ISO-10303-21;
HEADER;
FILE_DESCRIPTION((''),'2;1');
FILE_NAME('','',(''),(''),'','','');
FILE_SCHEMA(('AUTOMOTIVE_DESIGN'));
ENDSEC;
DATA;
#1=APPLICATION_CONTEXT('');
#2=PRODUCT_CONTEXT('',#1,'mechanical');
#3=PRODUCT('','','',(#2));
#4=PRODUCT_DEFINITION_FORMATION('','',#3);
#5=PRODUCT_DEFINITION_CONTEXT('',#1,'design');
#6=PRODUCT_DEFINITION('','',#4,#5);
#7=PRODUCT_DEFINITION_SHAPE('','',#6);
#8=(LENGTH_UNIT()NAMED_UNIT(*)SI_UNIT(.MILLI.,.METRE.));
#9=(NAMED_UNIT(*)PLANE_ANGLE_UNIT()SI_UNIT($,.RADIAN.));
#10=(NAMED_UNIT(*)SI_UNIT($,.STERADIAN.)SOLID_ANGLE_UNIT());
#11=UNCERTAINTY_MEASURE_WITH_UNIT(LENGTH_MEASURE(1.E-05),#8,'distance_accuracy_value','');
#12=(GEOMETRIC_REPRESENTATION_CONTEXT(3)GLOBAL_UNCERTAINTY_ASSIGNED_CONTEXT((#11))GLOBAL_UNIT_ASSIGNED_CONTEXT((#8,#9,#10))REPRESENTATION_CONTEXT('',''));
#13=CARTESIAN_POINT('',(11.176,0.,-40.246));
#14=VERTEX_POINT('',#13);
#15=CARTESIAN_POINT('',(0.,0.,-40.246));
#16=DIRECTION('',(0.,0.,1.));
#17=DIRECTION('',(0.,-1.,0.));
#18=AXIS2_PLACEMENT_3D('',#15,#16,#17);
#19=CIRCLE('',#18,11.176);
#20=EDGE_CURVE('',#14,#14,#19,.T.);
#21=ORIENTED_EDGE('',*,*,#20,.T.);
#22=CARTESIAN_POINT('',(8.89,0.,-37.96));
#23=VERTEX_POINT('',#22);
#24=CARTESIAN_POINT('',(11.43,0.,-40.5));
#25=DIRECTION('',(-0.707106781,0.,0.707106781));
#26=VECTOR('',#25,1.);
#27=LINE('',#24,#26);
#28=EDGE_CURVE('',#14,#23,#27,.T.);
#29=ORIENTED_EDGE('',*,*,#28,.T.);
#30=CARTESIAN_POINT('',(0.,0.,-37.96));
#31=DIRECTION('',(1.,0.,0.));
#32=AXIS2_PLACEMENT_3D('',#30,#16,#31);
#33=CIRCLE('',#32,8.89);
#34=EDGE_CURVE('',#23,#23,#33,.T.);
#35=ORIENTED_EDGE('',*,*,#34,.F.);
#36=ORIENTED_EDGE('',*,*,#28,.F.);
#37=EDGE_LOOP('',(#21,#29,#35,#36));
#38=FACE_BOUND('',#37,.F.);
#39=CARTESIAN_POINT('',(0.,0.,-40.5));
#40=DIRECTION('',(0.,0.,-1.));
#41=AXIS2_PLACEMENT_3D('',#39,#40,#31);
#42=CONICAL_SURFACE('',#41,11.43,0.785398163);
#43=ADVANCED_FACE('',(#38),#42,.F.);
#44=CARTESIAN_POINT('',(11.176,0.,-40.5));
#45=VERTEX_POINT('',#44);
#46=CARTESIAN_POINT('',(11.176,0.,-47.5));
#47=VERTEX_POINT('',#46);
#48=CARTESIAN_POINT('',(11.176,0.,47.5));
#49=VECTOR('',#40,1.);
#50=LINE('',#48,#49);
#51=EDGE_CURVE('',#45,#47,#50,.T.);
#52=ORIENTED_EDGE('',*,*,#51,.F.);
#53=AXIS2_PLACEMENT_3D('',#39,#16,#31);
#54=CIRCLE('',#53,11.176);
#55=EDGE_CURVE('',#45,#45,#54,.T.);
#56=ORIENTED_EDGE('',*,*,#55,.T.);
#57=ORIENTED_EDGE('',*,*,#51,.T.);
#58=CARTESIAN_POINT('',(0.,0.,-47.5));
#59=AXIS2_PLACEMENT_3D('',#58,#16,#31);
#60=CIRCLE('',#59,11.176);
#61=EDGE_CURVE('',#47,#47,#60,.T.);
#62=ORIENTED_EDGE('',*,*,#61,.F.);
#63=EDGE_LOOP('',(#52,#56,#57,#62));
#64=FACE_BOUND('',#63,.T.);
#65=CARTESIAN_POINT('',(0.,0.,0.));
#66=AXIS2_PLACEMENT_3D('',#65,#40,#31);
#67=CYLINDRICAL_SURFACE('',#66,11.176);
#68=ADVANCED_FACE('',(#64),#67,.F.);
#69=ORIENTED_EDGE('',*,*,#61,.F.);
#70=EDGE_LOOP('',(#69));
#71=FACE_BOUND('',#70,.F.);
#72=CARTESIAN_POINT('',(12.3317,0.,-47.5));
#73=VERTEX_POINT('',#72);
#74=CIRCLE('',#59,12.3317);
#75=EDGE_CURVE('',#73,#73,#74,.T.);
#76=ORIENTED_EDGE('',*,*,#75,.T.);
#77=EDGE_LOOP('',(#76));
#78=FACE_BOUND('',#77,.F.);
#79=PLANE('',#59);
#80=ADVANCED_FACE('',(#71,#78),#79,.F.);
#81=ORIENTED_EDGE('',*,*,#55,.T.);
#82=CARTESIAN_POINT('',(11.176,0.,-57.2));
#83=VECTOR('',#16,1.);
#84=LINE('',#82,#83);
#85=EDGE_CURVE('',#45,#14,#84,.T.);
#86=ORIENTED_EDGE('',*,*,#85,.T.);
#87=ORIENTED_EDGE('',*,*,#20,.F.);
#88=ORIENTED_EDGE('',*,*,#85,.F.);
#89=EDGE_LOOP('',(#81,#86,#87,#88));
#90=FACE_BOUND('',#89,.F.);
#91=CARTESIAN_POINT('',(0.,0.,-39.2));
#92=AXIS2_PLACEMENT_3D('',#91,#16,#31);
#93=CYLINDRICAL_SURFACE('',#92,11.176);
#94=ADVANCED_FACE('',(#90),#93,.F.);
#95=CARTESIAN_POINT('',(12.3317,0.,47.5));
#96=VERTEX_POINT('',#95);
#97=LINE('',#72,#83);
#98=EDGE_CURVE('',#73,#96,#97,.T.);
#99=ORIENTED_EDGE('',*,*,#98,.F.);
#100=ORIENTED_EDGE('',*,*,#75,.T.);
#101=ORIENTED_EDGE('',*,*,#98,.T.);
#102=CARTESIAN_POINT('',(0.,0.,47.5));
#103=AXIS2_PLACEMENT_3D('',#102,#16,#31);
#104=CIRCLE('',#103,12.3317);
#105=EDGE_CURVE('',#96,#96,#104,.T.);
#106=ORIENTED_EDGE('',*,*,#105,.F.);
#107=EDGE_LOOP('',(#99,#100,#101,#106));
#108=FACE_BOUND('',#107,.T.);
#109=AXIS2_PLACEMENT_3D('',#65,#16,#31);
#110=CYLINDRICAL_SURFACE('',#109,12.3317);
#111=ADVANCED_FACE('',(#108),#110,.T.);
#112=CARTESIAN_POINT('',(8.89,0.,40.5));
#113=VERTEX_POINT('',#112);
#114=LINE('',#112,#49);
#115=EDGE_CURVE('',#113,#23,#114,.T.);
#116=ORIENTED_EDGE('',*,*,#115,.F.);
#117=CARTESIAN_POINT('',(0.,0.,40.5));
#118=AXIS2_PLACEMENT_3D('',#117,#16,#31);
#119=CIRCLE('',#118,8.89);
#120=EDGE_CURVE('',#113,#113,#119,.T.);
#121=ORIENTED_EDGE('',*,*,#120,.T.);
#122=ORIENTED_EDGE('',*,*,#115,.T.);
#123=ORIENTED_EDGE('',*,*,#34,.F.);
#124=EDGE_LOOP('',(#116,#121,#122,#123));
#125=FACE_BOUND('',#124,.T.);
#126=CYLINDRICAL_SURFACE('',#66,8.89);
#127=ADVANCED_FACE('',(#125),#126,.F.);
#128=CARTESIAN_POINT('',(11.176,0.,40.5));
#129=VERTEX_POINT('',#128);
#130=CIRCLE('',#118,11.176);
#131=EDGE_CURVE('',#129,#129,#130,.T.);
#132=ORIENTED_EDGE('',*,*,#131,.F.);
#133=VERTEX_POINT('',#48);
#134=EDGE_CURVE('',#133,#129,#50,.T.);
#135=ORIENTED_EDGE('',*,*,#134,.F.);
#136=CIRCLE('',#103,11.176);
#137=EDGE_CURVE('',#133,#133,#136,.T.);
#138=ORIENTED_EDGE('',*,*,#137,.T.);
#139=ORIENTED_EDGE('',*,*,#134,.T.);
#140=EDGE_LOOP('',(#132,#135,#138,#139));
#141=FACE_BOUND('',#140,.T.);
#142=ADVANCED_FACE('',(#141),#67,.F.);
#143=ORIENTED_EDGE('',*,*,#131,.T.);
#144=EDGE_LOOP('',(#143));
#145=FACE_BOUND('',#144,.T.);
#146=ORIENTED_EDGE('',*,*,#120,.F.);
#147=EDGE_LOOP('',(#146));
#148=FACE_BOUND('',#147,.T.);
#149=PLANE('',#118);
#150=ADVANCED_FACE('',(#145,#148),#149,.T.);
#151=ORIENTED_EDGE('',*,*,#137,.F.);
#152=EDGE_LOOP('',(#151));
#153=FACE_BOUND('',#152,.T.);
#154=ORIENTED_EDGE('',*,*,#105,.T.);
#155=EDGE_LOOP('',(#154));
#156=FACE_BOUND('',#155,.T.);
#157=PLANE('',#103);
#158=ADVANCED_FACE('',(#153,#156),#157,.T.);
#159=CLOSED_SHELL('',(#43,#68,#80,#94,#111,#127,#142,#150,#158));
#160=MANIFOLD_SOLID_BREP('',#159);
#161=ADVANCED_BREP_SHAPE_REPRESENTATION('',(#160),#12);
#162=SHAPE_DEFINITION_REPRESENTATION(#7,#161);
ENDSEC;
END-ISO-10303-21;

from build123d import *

# Parameters (mm, degrees)
F0_R        = 12.3317
F0_R_2      = 11.176
F1_DEPTH    = 47.5
F0_R_3      = 8.89
F2_DEPTH    = 40.5
F3_S5_R     = 11.176
F3_T6_DEPTH = 18


# Not quite as in the source:
# - a fillet or chamfer that OpenCascade refuses, or shapes differently, is made with other operations: its cross-section is extruded or revolved along the edge and cut away or added


with BuildPart() as f1:
    # F0 (on Top) → F1 (new body, symmetric)
    with BuildSketch(Plane.XY):
        Circle(F0_R)
        Circle(F0_R_2, mode=Mode.SUBTRACT)
    extrude(amount=F1_DEPTH, both=True)

    # F0 (on Top) → F2 (join, symmetric)
    with BuildSketch(Plane.XY):
        Circle(F0_R_2)
        Circle(F0_R_3, mode=Mode.SUBTRACT)
    extrude(amount=F2_DEPTH, both=True)

    # F3: chamfer of 2.54 on 1 edges, made by hand


with BuildPart() as f3_tool2:
    # F3_s3 → F3_t4 (revolve)
    with BuildSketch(Plane.XZ):
        Polygon((11.43, -40.5), (8.89, -37.96), (8.89, -40.5), align=None)
    revolve(axis=Axis((0, 0, -40.5), (0, 0, 1)))

    # F3_s5 → F3_t6 (intersect, symmetric)
    with BuildSketch(Plane.XY.offset(-39.2)):
        Circle(F3_S5_R)
    extrude(amount=F3_T6_DEPTH, both=True, mode=Mode.INTERSECT)


with BuildPart() as f1_1:
    add(f1.part)

    # F3_t1: cut F3_tool2
    add(f3_tool2.part, mode=Mode.SUBTRACT)


solid = f1_1.part
